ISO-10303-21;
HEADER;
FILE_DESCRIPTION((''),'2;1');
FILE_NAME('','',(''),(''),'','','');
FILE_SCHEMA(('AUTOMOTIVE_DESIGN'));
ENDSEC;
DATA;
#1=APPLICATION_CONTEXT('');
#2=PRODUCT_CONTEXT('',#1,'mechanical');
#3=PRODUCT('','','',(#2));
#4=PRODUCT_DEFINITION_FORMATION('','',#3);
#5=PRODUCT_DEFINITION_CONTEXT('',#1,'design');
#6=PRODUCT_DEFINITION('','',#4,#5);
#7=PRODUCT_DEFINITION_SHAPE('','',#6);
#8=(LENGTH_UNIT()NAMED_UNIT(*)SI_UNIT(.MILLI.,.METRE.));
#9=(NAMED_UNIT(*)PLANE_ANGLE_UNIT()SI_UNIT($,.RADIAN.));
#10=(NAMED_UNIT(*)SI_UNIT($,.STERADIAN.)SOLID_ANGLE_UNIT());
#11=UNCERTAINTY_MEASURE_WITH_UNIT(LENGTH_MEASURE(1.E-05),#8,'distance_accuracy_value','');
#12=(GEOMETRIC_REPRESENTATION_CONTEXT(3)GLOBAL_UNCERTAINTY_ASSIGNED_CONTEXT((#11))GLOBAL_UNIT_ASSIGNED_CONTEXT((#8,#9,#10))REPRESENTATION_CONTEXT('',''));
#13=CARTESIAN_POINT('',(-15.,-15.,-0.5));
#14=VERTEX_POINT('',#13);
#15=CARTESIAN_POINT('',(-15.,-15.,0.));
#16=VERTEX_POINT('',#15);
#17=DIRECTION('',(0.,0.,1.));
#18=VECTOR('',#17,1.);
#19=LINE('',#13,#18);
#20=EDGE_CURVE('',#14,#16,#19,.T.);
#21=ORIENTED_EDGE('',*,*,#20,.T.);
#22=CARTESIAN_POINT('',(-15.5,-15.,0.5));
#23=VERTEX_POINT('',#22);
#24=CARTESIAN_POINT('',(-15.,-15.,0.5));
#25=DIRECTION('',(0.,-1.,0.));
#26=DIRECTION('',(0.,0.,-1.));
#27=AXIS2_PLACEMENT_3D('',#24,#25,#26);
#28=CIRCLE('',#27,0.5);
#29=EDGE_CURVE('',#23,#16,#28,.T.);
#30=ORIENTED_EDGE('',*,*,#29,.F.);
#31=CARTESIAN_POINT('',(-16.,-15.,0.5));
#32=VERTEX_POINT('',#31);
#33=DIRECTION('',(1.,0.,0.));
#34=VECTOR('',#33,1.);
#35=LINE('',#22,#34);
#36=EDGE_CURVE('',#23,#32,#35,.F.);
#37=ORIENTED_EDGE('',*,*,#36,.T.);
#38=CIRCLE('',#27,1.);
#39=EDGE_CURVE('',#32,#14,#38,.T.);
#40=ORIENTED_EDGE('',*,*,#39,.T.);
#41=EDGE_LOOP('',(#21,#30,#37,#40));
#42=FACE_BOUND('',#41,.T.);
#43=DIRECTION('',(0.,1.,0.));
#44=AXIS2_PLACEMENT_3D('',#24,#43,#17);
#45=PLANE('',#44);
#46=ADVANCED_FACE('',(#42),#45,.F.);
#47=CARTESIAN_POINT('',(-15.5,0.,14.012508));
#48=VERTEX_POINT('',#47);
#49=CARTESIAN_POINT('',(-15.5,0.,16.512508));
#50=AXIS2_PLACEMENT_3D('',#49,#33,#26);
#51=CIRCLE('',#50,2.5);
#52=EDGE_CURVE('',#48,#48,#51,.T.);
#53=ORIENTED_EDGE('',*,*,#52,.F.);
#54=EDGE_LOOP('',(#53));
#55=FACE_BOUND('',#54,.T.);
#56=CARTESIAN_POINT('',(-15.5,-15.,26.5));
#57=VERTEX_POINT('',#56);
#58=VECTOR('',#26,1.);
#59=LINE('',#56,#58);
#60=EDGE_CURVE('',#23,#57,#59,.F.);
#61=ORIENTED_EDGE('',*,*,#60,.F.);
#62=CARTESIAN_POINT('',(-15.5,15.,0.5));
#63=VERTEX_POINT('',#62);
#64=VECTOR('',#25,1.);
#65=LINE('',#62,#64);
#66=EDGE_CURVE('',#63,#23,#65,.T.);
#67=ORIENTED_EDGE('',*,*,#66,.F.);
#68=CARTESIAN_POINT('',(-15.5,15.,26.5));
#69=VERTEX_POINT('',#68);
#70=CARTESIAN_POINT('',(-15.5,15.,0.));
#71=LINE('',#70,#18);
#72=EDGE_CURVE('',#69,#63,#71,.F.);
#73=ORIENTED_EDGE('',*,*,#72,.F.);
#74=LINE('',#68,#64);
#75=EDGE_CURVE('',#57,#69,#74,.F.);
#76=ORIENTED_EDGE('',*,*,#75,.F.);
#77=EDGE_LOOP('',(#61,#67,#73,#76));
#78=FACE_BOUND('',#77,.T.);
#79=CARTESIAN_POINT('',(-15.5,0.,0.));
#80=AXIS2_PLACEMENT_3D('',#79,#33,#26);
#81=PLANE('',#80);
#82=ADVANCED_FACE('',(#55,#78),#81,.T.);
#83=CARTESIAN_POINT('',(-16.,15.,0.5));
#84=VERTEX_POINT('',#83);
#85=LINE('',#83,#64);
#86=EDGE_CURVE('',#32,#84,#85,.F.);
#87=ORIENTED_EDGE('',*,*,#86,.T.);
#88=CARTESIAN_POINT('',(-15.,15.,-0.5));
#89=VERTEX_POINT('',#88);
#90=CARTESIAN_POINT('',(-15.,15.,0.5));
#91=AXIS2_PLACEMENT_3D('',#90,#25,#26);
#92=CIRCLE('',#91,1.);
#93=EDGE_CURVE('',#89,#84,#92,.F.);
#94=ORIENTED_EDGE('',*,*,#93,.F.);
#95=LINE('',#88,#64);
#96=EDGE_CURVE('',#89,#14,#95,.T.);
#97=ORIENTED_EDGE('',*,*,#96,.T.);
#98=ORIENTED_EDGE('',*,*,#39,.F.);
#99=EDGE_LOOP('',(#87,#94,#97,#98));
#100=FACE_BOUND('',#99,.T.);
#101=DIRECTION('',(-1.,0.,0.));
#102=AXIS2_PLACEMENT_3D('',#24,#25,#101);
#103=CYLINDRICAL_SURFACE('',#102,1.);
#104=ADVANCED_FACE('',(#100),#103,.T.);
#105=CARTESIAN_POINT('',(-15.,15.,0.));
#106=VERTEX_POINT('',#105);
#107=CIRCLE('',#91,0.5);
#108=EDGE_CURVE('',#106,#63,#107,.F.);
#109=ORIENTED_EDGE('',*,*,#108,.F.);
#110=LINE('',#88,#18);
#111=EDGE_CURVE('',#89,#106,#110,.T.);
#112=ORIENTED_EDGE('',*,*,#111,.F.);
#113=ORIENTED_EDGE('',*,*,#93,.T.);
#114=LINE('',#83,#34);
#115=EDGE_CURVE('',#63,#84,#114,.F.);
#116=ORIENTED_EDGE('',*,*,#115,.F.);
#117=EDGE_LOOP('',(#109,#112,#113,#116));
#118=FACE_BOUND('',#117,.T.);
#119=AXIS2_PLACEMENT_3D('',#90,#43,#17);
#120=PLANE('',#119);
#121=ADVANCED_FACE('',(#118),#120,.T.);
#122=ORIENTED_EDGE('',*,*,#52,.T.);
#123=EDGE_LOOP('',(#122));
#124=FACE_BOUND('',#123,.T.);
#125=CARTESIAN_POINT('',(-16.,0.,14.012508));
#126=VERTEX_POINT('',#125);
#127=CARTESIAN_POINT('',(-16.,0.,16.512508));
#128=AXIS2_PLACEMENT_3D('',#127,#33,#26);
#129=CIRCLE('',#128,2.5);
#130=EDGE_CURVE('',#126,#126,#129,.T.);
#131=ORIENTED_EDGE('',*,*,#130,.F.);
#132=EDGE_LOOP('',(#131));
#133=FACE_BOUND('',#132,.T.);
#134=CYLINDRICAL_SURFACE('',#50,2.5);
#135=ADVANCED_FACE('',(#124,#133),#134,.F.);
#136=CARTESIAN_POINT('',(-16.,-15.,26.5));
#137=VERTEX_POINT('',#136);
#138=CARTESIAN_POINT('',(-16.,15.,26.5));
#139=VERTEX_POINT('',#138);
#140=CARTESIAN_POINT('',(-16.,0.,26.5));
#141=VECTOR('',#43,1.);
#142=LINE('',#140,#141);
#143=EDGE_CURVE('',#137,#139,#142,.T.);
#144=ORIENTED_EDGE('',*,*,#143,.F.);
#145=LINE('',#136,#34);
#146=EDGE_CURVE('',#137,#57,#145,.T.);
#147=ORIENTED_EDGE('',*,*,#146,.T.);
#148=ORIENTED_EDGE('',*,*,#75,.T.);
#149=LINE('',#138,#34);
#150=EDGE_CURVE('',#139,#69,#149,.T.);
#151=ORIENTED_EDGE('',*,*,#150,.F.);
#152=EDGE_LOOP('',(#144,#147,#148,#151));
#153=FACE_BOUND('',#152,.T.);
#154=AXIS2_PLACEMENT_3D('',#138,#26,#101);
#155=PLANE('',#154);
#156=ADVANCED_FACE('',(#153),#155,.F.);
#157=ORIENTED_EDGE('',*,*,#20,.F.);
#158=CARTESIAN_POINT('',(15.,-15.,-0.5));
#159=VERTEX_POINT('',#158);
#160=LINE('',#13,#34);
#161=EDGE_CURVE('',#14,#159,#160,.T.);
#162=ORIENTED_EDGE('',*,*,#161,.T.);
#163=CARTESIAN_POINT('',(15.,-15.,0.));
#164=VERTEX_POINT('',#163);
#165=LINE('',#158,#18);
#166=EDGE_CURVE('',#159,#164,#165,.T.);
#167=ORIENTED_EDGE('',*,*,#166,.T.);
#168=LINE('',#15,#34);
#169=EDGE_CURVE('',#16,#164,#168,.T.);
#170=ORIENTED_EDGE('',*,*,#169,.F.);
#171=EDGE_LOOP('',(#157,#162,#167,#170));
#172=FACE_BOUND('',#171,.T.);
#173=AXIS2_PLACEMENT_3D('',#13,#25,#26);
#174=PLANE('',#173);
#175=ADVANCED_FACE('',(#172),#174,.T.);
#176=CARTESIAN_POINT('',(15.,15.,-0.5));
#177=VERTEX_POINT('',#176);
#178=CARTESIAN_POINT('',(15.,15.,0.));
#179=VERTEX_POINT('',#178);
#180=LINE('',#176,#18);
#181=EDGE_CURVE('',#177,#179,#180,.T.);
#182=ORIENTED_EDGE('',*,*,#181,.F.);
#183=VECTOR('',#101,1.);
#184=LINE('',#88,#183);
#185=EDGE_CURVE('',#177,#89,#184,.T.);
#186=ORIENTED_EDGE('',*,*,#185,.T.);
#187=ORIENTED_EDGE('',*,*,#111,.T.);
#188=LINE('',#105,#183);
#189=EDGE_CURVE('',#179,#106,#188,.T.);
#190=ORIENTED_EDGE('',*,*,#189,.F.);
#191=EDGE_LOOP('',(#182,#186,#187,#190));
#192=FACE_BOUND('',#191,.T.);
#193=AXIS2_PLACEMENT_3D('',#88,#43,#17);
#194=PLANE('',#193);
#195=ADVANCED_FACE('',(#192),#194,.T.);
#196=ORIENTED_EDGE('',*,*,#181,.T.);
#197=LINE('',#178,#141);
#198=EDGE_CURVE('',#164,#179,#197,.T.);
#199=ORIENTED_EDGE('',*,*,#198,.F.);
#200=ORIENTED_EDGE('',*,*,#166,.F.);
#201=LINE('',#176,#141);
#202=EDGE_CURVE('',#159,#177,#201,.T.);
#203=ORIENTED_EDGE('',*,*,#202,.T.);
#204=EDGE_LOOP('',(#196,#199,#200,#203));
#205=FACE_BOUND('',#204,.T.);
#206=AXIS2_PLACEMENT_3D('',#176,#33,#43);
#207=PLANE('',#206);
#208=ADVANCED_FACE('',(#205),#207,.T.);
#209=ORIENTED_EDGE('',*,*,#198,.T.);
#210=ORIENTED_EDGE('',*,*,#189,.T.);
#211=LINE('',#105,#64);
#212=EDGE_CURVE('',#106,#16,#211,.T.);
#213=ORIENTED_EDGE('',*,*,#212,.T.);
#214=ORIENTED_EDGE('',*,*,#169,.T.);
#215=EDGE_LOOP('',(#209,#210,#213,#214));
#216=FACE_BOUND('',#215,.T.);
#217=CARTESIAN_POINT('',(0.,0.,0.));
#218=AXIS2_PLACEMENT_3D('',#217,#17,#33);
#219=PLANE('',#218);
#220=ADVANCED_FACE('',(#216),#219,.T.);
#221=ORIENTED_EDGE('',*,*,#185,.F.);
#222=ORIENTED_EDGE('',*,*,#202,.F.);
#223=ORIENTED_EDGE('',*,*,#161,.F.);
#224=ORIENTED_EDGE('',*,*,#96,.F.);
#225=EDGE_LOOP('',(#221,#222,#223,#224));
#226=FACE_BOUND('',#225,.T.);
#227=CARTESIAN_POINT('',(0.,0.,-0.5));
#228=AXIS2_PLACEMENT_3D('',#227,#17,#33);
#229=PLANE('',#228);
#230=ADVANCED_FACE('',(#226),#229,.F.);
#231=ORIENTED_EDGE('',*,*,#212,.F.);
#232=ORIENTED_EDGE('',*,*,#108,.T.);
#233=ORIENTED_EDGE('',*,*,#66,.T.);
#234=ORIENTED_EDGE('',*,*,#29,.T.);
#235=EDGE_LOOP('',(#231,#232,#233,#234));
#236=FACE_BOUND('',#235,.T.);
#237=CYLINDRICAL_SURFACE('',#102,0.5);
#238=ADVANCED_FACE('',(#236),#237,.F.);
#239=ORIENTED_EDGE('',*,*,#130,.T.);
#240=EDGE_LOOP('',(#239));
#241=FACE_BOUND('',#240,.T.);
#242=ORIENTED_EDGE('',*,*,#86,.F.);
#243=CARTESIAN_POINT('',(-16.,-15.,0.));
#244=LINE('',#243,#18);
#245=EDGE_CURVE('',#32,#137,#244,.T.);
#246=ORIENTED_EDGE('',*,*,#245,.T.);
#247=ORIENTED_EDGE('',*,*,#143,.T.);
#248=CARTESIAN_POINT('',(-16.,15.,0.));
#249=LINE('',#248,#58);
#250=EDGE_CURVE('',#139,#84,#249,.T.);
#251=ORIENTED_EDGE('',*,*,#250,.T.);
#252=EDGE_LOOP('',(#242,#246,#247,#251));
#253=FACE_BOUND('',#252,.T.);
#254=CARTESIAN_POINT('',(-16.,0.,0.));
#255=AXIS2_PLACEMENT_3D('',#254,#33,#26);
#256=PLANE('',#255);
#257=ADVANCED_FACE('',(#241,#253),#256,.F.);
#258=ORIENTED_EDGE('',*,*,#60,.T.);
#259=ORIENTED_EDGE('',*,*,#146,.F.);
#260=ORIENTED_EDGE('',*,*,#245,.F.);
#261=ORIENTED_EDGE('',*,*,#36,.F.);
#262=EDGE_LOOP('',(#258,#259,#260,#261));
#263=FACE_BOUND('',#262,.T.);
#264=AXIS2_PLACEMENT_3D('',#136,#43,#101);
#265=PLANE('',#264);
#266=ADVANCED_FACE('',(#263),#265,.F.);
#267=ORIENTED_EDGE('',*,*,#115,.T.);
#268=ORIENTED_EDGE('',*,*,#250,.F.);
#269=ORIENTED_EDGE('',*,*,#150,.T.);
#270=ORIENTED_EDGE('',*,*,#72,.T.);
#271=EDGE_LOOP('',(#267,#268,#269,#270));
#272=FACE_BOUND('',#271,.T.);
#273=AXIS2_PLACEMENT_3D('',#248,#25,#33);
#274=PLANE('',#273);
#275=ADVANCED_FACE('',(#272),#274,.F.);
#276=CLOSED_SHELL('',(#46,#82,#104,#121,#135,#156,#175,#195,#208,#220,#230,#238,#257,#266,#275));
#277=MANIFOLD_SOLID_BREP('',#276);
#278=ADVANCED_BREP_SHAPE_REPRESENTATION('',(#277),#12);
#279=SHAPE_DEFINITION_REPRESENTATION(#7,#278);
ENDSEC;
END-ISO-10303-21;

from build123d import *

# Parameters (mm, degrees)
SKETCH_1_W             = 30
SKETCH_1_H             = 30
SM_BASE_FLANGE_1_DEPTH = 0.5
SM_EDGE_FLANGE_1_DEPTH = 30
HOLE_WIZARD_M6_1_D     = 5
HOLE_WIZARD_M6_1_DEPTH = 15
HOLE_WIZARD_M6_1_TIP   = 1.502151548


# Sheet-metal steps are written as plain solids
with BuildPart() as part:
    # Sketch 1 → 基体-法兰1 (new body)
    with BuildSketch(Plane.XY):
        Rectangle(SKETCH_1_W, SKETCH_1_H)
    extrude(amount=-SM_BASE_FLANGE_1_DEPTH)

    # 边线-法兰1 section (across the edge) → 边线-法兰1 (add)
    with BuildSketch(Plane(origin=(-15.5, 15, 0), x_dir=(1, 0, 0), z_dir=(0, -1, 0))):
        with BuildLine():
            Line((-0.5, 0.5), (-0.5, 26.5))
            Line((-0.5, 26.5), (0, 26.5))
            Line((0, 26.5), (0, 0.5))
            ThreePointArc((0, 0.5), (0.146446609, 0.146446609), (0.5, 0))
            Line((0.5, 0), (0.5, -0.5))
            ThreePointArc((0.5, -0.5), (-0.207106781, -0.207106781), (-0.5, 0.5))
        make_face()
    extrude(amount=SM_EDGE_FLANGE_1_DEPTH)

    # M6 螺纹孔的螺纹孔钻头1
    with Locations(Plane(origin=(-15.5, 0, 16.512507822), x_dir=(0, 0, 1), z_dir=(1, 0, 0))):
        with Locations((0, 0)):
            Hole(HOLE_WIZARD_M6_1_D / 2, depth=HOLE_WIZARD_M6_1_DEPTH)
            with Locations((0, 0, -(HOLE_WIZARD_M6_1_DEPTH + HOLE_WIZARD_M6_1_TIP / 2))):  # 118° drill point
                Cone(0, HOLE_WIZARD_M6_1_D / 2, HOLE_WIZARD_M6_1_TIP, mode=Mode.SUBTRACT)


solid = part.part
